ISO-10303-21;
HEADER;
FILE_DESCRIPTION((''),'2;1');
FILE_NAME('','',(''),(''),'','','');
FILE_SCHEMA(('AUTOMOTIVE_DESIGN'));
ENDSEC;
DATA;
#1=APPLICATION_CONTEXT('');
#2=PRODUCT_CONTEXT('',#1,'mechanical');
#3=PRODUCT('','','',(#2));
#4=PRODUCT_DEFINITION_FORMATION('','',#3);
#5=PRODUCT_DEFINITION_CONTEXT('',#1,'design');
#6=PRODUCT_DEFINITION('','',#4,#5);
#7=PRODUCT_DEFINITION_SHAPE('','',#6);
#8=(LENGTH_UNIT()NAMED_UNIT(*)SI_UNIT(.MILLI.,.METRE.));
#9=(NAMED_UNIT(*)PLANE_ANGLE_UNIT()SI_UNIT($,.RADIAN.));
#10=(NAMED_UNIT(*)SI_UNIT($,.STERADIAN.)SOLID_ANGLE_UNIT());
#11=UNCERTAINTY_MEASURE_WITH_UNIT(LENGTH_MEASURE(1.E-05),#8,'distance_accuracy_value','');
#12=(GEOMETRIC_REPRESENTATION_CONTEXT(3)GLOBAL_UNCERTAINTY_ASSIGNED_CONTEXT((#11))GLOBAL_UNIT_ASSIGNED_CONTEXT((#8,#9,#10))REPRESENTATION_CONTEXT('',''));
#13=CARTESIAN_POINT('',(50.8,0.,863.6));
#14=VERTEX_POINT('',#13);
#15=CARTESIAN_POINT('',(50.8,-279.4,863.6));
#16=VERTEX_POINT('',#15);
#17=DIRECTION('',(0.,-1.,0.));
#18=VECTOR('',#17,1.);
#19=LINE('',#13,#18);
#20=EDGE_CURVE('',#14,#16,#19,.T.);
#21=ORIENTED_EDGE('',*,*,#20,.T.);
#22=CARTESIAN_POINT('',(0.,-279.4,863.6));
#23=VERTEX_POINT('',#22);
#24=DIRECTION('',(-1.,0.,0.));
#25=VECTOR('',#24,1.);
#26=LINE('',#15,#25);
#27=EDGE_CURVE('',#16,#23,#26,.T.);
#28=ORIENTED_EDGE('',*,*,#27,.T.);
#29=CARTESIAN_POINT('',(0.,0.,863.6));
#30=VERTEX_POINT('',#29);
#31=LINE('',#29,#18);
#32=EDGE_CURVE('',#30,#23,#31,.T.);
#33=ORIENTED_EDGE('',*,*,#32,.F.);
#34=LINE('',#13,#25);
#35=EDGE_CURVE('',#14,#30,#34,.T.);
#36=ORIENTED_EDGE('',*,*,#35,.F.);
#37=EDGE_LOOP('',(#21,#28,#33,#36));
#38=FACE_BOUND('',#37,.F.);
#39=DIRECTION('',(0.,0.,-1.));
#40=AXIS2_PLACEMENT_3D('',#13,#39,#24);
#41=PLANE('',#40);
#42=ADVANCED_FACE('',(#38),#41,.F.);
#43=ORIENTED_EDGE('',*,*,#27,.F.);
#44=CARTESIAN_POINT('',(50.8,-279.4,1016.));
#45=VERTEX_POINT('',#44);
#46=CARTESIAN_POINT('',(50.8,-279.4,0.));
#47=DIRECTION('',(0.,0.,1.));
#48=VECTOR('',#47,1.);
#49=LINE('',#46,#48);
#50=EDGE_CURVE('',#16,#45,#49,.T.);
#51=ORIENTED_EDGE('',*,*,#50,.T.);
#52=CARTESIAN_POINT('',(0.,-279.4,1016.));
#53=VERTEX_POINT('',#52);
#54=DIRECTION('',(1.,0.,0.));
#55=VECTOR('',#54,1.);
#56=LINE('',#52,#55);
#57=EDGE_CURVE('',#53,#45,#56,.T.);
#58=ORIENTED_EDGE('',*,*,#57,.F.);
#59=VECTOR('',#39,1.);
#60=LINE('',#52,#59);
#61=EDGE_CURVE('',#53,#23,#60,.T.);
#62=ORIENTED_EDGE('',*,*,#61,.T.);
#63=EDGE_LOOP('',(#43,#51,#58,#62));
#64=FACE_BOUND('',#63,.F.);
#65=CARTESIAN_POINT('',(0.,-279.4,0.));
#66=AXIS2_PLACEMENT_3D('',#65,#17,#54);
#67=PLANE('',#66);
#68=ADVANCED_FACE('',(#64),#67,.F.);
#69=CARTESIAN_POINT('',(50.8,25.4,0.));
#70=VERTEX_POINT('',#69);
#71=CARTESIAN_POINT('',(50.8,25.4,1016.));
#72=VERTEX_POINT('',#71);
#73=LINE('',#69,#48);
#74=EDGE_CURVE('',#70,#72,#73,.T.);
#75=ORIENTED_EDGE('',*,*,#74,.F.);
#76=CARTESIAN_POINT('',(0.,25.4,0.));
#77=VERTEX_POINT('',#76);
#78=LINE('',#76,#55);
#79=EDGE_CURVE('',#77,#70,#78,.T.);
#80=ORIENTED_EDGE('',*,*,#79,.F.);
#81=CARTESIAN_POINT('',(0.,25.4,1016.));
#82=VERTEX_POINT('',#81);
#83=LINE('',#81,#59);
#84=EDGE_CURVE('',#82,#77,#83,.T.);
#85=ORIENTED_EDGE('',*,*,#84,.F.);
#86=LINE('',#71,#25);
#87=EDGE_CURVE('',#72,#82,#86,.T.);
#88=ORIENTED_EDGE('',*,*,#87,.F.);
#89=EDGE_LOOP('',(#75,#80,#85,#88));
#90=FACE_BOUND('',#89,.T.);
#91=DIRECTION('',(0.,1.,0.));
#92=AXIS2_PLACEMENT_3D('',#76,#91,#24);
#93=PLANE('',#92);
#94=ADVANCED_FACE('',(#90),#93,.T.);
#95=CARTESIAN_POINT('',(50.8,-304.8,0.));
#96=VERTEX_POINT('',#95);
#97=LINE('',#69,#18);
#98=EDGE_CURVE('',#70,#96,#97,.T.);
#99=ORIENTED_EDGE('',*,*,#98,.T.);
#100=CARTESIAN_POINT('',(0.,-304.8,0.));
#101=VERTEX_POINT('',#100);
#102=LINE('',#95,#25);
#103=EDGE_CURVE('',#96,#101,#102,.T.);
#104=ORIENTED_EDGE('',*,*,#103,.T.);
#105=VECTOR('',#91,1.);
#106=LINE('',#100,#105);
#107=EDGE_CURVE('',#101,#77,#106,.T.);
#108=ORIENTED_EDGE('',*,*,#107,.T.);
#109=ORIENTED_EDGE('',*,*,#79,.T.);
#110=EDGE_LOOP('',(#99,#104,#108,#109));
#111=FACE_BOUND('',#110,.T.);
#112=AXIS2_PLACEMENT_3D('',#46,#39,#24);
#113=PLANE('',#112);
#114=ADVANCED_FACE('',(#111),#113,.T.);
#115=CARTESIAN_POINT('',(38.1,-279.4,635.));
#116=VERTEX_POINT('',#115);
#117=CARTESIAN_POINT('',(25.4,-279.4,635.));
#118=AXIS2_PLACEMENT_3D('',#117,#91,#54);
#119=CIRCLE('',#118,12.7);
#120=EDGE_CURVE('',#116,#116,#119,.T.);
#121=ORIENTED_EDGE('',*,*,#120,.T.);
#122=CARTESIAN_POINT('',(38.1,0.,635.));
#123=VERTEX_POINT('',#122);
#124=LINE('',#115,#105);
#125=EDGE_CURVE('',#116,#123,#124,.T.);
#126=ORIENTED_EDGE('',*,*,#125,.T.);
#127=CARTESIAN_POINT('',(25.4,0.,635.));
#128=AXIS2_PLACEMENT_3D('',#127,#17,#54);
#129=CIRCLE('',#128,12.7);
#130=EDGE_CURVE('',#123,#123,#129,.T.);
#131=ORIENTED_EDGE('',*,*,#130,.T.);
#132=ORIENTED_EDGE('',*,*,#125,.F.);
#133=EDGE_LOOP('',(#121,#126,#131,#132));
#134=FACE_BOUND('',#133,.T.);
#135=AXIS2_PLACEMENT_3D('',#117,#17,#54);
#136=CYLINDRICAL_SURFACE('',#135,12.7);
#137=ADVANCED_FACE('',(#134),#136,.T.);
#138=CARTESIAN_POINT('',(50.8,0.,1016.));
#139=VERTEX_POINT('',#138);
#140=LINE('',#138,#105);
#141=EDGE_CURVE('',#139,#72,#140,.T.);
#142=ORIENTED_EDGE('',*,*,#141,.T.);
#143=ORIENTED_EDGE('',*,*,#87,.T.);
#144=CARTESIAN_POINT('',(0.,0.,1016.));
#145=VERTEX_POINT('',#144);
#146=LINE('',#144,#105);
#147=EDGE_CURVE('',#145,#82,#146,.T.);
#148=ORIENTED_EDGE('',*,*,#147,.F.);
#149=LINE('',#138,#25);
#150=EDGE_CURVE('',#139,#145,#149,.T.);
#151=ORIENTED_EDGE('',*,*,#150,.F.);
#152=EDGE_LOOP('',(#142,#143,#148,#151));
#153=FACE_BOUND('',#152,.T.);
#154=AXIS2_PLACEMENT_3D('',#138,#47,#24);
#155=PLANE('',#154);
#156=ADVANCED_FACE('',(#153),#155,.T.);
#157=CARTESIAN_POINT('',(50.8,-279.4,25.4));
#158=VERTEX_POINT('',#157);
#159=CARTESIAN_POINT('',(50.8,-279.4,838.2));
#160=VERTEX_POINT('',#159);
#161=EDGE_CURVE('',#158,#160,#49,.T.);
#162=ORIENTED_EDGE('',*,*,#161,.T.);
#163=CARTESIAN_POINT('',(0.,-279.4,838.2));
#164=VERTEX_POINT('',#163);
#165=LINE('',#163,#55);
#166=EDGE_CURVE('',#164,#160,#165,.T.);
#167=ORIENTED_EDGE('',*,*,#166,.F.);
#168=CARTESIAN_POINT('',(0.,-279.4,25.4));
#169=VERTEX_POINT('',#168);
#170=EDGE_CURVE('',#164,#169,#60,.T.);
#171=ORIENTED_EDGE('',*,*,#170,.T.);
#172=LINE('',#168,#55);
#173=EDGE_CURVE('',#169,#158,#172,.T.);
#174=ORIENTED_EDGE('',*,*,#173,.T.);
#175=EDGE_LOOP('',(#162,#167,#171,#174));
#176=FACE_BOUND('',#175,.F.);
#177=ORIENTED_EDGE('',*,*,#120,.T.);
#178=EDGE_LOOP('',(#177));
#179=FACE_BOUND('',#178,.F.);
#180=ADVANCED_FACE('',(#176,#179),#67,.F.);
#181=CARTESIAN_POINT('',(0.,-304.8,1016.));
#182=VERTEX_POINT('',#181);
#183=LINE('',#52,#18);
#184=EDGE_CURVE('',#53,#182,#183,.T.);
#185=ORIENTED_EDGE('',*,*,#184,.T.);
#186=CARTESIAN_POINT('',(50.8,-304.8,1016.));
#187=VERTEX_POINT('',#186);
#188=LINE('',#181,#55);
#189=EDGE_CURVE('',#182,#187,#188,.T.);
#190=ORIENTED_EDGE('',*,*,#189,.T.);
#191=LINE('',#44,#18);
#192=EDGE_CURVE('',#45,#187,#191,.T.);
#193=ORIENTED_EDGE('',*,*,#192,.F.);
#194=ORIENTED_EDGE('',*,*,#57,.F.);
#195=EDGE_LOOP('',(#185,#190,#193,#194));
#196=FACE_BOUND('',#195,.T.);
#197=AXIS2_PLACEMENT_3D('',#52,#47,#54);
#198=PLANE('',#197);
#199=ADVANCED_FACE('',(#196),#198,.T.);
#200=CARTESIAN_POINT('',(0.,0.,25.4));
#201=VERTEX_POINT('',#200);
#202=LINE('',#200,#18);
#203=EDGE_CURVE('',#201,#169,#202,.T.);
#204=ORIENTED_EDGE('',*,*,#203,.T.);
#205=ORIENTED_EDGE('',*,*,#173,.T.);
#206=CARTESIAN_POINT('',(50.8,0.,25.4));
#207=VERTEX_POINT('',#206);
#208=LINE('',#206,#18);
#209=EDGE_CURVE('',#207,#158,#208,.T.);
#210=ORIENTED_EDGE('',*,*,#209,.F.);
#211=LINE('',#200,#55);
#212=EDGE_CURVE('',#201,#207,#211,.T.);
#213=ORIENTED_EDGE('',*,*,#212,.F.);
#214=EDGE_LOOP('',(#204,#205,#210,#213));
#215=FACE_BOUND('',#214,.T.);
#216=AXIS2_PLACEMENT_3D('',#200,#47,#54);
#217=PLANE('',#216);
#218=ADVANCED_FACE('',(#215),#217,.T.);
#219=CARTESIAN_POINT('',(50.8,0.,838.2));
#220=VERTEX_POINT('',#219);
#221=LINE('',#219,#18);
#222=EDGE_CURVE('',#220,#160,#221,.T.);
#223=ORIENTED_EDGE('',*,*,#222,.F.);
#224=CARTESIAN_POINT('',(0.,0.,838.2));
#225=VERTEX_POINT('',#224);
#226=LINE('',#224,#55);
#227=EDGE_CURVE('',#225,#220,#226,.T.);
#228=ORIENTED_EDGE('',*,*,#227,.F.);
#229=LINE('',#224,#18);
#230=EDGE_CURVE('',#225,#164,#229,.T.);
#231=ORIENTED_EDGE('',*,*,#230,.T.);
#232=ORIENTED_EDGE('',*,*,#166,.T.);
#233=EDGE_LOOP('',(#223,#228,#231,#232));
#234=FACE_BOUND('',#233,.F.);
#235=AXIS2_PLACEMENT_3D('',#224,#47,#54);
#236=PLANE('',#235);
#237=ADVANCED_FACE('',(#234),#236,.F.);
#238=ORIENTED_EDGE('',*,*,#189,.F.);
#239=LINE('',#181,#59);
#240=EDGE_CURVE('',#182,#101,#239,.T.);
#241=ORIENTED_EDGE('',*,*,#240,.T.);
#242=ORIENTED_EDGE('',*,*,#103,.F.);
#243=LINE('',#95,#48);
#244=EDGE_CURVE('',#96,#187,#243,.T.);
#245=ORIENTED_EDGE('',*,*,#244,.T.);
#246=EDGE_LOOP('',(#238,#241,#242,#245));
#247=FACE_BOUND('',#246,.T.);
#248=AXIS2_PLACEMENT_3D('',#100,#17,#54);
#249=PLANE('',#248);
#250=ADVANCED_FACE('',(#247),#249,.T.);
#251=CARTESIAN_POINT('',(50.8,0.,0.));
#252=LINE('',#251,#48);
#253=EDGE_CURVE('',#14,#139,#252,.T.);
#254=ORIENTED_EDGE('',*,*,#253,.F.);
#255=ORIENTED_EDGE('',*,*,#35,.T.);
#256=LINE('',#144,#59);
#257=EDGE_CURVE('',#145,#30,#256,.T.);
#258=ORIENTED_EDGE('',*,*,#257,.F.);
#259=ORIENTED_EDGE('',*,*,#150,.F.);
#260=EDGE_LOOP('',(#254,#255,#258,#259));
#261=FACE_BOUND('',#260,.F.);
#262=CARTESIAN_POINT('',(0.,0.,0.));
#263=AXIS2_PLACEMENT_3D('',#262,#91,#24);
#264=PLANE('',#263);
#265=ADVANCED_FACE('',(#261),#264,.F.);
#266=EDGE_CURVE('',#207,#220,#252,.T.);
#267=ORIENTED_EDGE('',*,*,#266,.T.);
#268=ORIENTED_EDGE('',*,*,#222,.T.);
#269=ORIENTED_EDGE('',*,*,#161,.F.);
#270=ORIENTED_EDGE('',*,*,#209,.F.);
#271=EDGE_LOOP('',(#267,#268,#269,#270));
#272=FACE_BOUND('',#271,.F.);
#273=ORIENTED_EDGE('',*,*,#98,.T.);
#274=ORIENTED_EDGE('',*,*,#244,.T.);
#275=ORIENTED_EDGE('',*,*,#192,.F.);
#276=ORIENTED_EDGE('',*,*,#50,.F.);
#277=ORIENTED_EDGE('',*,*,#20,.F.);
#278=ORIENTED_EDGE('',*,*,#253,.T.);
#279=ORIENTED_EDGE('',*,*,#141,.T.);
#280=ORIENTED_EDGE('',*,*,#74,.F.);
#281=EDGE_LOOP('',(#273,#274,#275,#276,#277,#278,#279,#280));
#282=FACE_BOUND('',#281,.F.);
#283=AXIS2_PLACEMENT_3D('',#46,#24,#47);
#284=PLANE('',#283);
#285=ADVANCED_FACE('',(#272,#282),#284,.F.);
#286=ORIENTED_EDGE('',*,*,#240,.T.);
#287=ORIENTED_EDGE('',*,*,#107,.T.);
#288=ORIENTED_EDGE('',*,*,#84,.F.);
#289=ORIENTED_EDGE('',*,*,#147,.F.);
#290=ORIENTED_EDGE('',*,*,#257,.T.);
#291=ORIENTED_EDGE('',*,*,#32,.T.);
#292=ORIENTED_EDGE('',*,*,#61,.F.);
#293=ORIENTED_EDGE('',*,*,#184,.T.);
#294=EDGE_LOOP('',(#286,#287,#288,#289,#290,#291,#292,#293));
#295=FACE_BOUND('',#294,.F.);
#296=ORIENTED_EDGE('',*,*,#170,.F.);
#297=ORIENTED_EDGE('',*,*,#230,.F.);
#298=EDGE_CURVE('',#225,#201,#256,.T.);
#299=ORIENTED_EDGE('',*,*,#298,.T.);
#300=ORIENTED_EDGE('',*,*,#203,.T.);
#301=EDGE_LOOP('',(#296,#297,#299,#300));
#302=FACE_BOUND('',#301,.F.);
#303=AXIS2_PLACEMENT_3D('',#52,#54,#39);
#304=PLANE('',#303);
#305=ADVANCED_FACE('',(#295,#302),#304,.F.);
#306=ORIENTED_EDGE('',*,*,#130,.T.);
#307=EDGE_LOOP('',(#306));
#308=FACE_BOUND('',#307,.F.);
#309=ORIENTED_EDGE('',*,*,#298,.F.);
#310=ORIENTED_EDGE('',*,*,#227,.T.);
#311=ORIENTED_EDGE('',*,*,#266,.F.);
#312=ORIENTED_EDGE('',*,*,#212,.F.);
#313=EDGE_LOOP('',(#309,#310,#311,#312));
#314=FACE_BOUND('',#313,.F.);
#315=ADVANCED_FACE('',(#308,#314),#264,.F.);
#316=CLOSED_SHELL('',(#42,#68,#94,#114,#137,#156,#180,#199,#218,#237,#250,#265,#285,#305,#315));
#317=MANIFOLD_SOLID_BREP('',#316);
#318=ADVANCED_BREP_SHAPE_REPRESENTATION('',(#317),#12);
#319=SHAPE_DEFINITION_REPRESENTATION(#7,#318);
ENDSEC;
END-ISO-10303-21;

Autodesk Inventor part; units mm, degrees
ref_plane "YZ Plane" through (0, 0, 0) normal (1, 0, 0) x (0, 1, 0)
ref_plane "XZ Plane" through (0, 0, 0) normal (0, 1, 0) x (-1, 0, 0)
ref_plane "XY Plane" through (0, 0, 0) normal (0, 0, 1) x (1, 0, 0)
sketch "Sketch1" plane through (0, 0, 0) normal (0, 1, 0) x (-1, 0, 0)
  line L0 (0, 0) -> (-50.8, 0)
  line L1 (-50.8, 0) -> (-50.8, 1016)
  line L2 (-50.8, 1016) -> (0, 1016)
  line L3 (0, 1016) -> (0, 0)
  dimension "d0" = 1016
  dimension "d1" = 50.8
extrude "Extrusion1" add sketch "Sketch1" along normal blind 25.4
sketch "Sketch2" plane through (0, 0, 0) normal (0, -1, 0) x (1, 0, 0)
  line L0 (0, 838.2) -> (50.8, 838.2)
  line L1 (50.8, 838.2) -> (50.8, 863.6)
  line L2 (50.8, 863.6) -> (0, 863.6)
  line L3 (0, 863.6) -> (0, 838.2)
  line L4 (50.8, 1016) -> (0, 1016) projected
  line L5 (50.8, 0) -> (0, 0) projected
  line L6 (50.8, 0) -> (0, 0)
  line L7 (0, 0) -> (0, 25.4)
  line L8 (0, 25.4) -> (50.8, 25.4)
  line L9 (50.8, 25.4) -> (50.8, 0)
  dimension "d4" = 25.4
  dimension "d7" = 152.4
  dimension "d30" = 25.4
extrude "Extrusion2" add sketch "Sketch2" along normal blind 279.4
sketch "Sketch3" plane through (0, -279.4, 0) normal (0, -1, 0) x (1, 0, 0)
  line L0 (50.8, 0) -> (0, 0) projected
  line L1 (0, 1016) -> (50.8, 1016) projected
  line L2 (0, 0) -> (50.8, 0)
  line L3 (50.8, 0) -> (50.8, 1016)
  line L4 (50.8, 1016) -> (0, 1016)
  line L5 (0, 1016) -> (0, 0)
extrude "Extrusion3" add sketch "Sketch3" along normal blind 25.4
sketch "Sketch4" plane through (0, -279.4, 0) normal (0, 1, 0) x (1, 0, 0)
  circle A0 centre (25.4, -635) radius 12.7
  line L0 (0, -1016) -> (50.8, -1016) projected
  line L1 (0, -1016) -> (0, -863.6) projected
  point P0 (0, 0)
  dimension "d12" = 25.4
  dimension "d13" = 381
  dimension "d18" = 25.4
extrude "Extrusion4" add sketch "Sketch4" along normal blind 284.1625
properties part number "stage"
